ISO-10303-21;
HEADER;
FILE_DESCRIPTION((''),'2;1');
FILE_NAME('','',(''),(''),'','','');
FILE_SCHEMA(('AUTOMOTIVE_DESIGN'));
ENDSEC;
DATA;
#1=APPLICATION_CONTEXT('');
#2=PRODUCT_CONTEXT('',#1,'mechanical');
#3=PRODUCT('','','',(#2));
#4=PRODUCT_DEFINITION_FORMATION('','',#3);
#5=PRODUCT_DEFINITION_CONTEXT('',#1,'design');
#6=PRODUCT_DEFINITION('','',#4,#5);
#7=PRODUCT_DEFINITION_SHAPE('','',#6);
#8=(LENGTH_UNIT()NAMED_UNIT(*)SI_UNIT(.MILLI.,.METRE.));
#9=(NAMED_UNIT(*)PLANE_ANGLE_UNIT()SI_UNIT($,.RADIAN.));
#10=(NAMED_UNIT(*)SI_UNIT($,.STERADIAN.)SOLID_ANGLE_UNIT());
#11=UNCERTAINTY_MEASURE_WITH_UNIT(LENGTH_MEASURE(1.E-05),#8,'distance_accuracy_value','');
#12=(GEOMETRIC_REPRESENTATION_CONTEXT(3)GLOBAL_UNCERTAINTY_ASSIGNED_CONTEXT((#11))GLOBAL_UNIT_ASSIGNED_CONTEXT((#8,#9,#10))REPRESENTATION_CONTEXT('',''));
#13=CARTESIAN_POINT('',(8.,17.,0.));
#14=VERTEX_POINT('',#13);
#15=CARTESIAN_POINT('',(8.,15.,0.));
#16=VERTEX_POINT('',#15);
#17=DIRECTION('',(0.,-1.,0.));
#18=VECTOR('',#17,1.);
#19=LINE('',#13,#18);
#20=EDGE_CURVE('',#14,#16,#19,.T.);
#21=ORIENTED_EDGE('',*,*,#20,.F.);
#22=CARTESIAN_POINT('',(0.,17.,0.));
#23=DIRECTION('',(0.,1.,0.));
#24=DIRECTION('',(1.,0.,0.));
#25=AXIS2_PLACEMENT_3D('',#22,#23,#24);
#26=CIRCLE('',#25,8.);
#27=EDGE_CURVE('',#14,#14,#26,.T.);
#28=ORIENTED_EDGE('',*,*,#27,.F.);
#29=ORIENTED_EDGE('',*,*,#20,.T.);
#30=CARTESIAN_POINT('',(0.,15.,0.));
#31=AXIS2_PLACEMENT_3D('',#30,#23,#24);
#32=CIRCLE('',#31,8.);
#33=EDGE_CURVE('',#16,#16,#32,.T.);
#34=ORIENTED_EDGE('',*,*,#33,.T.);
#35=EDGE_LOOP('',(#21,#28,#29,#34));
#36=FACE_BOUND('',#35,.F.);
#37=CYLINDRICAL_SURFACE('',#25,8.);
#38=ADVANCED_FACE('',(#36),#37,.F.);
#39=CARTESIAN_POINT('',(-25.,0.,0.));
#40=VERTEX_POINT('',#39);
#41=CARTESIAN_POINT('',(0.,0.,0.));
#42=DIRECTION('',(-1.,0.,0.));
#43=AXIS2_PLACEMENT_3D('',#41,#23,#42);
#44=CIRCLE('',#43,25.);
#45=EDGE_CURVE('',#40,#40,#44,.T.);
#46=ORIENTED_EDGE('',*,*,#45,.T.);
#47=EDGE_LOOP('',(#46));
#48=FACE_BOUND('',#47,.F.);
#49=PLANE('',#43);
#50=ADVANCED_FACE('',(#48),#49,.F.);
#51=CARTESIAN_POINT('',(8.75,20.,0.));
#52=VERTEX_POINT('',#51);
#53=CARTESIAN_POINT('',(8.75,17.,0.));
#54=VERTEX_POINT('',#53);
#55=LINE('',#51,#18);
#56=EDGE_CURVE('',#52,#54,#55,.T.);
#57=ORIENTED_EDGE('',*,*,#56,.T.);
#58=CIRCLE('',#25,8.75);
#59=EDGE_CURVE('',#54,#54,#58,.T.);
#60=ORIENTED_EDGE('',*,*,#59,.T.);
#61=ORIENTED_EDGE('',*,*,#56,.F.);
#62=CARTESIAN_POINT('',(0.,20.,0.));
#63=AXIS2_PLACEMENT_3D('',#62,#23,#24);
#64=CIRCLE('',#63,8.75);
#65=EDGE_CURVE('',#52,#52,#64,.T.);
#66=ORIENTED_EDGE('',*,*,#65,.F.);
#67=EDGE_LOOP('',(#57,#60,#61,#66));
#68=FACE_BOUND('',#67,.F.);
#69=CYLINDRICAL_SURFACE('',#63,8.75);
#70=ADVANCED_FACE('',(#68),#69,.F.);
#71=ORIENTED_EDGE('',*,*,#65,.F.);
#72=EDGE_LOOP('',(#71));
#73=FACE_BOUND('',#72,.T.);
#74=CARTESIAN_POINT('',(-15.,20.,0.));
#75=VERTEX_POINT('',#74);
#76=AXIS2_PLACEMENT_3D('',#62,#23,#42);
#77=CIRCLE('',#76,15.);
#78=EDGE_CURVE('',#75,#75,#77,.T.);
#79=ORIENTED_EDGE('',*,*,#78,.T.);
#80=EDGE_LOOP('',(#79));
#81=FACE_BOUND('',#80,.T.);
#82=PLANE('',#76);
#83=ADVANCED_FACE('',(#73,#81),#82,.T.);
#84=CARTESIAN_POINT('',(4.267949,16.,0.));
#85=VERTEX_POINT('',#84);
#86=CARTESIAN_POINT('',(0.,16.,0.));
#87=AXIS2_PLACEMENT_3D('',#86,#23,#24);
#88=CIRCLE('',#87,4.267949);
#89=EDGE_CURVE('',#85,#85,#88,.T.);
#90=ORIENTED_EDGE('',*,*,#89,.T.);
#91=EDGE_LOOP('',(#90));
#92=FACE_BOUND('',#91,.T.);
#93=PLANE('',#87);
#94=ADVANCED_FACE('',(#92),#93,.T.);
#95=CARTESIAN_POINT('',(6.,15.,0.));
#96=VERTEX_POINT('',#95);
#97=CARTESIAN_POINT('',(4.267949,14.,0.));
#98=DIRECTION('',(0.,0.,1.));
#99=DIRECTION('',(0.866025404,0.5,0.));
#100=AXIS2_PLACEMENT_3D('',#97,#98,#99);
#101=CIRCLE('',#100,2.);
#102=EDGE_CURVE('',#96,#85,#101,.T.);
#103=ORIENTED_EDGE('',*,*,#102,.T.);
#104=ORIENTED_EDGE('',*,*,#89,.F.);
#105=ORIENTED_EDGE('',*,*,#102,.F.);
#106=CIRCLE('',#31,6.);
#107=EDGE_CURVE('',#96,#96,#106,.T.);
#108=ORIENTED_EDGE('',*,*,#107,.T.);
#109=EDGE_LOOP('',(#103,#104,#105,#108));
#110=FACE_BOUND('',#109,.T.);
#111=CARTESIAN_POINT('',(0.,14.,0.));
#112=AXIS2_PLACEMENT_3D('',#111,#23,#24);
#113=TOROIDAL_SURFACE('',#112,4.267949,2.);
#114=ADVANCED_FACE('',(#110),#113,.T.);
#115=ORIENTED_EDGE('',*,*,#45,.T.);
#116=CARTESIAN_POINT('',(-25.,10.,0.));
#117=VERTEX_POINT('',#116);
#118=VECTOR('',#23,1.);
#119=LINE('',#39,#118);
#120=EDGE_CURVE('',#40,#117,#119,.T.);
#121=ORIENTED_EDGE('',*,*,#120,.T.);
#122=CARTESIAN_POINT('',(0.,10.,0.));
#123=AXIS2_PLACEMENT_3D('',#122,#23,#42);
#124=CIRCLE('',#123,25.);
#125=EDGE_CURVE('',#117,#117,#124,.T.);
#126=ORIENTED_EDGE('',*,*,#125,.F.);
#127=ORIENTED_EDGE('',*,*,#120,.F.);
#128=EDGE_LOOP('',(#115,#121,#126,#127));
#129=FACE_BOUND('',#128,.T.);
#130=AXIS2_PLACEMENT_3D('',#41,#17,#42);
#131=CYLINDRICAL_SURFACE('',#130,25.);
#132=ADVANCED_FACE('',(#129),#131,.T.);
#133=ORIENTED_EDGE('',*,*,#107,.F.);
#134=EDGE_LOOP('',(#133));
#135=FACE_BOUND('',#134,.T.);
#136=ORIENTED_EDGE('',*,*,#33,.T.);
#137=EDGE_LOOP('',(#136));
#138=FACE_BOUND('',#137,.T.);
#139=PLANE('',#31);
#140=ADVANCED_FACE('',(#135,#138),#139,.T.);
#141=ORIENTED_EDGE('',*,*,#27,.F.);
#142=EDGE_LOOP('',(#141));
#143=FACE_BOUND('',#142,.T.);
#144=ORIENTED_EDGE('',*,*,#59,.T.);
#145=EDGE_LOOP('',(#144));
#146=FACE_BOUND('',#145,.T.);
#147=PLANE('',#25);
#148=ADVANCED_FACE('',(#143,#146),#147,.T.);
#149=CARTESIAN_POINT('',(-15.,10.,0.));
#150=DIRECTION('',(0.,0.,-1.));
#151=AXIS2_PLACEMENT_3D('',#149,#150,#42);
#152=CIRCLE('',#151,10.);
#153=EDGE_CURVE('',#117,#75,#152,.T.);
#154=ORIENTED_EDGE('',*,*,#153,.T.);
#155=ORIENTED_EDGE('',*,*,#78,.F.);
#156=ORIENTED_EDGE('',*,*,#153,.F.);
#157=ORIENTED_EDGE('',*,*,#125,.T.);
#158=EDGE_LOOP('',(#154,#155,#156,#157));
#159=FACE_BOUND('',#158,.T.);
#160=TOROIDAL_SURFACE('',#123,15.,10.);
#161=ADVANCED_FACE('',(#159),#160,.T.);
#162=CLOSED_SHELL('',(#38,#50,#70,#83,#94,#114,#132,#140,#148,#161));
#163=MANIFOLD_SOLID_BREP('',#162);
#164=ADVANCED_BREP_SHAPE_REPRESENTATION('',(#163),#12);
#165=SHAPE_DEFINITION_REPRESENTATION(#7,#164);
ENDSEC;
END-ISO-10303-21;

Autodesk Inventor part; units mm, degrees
ref_plane "YZ Plane" through (0, 0, 0) normal (1, 0, 0) x (0, 1, 0)
ref_plane "XZ Plane" through (0, 0, 0) normal (0, 1, 0) x (-1, 0, 0)
ref_plane "XY Plane" through (0, 0, 0) normal (0, 0, 1) x (1, 0, 0)
sketch "Sketch1" plane through (0, 0, 0) normal (0, 1, 0) x (-1, 0, 0)
  circle A0 centre (0, 0) radius 25
  dimension "d0" = 50
extrude "Extrusion1" add sketch "Sketch1" along normal blind 20
fillet "Fillet1" radius 10 1 edges at (25, 20, 0)
sketch "Sketch2" plane through (0, 20, 0) normal (0, 1, 0) x (1, 0, 0)
  circle A0 centre (0, 0) radius 8.75
  dimension "d4" = 17.5
extrude "Extrusion2" cut sketch "Sketch2" against normal blind 3
sketch "Sketch3" plane through (0, 17, 0) normal (0, 1, 0) x (1, 0, 0)
  circle A0 centre (0, 0) radius 8
  dimension "d7" = 16
extrude "Extrusion3" cut sketch "Sketch3" against normal blind 2
sketch "Sketch5" plane through (0, 15, 0) normal (0, 1, 0) x (1, 0, 0)
  circle A0 centre (0, 0) radius 6
  dimension "d10" = 12
extrude "Extrusion4" add sketch "Sketch5" along normal blind 1
fillet "Fillet2" radius 2 1 edges at (-6, 16, 0)
properties part number "camera"
